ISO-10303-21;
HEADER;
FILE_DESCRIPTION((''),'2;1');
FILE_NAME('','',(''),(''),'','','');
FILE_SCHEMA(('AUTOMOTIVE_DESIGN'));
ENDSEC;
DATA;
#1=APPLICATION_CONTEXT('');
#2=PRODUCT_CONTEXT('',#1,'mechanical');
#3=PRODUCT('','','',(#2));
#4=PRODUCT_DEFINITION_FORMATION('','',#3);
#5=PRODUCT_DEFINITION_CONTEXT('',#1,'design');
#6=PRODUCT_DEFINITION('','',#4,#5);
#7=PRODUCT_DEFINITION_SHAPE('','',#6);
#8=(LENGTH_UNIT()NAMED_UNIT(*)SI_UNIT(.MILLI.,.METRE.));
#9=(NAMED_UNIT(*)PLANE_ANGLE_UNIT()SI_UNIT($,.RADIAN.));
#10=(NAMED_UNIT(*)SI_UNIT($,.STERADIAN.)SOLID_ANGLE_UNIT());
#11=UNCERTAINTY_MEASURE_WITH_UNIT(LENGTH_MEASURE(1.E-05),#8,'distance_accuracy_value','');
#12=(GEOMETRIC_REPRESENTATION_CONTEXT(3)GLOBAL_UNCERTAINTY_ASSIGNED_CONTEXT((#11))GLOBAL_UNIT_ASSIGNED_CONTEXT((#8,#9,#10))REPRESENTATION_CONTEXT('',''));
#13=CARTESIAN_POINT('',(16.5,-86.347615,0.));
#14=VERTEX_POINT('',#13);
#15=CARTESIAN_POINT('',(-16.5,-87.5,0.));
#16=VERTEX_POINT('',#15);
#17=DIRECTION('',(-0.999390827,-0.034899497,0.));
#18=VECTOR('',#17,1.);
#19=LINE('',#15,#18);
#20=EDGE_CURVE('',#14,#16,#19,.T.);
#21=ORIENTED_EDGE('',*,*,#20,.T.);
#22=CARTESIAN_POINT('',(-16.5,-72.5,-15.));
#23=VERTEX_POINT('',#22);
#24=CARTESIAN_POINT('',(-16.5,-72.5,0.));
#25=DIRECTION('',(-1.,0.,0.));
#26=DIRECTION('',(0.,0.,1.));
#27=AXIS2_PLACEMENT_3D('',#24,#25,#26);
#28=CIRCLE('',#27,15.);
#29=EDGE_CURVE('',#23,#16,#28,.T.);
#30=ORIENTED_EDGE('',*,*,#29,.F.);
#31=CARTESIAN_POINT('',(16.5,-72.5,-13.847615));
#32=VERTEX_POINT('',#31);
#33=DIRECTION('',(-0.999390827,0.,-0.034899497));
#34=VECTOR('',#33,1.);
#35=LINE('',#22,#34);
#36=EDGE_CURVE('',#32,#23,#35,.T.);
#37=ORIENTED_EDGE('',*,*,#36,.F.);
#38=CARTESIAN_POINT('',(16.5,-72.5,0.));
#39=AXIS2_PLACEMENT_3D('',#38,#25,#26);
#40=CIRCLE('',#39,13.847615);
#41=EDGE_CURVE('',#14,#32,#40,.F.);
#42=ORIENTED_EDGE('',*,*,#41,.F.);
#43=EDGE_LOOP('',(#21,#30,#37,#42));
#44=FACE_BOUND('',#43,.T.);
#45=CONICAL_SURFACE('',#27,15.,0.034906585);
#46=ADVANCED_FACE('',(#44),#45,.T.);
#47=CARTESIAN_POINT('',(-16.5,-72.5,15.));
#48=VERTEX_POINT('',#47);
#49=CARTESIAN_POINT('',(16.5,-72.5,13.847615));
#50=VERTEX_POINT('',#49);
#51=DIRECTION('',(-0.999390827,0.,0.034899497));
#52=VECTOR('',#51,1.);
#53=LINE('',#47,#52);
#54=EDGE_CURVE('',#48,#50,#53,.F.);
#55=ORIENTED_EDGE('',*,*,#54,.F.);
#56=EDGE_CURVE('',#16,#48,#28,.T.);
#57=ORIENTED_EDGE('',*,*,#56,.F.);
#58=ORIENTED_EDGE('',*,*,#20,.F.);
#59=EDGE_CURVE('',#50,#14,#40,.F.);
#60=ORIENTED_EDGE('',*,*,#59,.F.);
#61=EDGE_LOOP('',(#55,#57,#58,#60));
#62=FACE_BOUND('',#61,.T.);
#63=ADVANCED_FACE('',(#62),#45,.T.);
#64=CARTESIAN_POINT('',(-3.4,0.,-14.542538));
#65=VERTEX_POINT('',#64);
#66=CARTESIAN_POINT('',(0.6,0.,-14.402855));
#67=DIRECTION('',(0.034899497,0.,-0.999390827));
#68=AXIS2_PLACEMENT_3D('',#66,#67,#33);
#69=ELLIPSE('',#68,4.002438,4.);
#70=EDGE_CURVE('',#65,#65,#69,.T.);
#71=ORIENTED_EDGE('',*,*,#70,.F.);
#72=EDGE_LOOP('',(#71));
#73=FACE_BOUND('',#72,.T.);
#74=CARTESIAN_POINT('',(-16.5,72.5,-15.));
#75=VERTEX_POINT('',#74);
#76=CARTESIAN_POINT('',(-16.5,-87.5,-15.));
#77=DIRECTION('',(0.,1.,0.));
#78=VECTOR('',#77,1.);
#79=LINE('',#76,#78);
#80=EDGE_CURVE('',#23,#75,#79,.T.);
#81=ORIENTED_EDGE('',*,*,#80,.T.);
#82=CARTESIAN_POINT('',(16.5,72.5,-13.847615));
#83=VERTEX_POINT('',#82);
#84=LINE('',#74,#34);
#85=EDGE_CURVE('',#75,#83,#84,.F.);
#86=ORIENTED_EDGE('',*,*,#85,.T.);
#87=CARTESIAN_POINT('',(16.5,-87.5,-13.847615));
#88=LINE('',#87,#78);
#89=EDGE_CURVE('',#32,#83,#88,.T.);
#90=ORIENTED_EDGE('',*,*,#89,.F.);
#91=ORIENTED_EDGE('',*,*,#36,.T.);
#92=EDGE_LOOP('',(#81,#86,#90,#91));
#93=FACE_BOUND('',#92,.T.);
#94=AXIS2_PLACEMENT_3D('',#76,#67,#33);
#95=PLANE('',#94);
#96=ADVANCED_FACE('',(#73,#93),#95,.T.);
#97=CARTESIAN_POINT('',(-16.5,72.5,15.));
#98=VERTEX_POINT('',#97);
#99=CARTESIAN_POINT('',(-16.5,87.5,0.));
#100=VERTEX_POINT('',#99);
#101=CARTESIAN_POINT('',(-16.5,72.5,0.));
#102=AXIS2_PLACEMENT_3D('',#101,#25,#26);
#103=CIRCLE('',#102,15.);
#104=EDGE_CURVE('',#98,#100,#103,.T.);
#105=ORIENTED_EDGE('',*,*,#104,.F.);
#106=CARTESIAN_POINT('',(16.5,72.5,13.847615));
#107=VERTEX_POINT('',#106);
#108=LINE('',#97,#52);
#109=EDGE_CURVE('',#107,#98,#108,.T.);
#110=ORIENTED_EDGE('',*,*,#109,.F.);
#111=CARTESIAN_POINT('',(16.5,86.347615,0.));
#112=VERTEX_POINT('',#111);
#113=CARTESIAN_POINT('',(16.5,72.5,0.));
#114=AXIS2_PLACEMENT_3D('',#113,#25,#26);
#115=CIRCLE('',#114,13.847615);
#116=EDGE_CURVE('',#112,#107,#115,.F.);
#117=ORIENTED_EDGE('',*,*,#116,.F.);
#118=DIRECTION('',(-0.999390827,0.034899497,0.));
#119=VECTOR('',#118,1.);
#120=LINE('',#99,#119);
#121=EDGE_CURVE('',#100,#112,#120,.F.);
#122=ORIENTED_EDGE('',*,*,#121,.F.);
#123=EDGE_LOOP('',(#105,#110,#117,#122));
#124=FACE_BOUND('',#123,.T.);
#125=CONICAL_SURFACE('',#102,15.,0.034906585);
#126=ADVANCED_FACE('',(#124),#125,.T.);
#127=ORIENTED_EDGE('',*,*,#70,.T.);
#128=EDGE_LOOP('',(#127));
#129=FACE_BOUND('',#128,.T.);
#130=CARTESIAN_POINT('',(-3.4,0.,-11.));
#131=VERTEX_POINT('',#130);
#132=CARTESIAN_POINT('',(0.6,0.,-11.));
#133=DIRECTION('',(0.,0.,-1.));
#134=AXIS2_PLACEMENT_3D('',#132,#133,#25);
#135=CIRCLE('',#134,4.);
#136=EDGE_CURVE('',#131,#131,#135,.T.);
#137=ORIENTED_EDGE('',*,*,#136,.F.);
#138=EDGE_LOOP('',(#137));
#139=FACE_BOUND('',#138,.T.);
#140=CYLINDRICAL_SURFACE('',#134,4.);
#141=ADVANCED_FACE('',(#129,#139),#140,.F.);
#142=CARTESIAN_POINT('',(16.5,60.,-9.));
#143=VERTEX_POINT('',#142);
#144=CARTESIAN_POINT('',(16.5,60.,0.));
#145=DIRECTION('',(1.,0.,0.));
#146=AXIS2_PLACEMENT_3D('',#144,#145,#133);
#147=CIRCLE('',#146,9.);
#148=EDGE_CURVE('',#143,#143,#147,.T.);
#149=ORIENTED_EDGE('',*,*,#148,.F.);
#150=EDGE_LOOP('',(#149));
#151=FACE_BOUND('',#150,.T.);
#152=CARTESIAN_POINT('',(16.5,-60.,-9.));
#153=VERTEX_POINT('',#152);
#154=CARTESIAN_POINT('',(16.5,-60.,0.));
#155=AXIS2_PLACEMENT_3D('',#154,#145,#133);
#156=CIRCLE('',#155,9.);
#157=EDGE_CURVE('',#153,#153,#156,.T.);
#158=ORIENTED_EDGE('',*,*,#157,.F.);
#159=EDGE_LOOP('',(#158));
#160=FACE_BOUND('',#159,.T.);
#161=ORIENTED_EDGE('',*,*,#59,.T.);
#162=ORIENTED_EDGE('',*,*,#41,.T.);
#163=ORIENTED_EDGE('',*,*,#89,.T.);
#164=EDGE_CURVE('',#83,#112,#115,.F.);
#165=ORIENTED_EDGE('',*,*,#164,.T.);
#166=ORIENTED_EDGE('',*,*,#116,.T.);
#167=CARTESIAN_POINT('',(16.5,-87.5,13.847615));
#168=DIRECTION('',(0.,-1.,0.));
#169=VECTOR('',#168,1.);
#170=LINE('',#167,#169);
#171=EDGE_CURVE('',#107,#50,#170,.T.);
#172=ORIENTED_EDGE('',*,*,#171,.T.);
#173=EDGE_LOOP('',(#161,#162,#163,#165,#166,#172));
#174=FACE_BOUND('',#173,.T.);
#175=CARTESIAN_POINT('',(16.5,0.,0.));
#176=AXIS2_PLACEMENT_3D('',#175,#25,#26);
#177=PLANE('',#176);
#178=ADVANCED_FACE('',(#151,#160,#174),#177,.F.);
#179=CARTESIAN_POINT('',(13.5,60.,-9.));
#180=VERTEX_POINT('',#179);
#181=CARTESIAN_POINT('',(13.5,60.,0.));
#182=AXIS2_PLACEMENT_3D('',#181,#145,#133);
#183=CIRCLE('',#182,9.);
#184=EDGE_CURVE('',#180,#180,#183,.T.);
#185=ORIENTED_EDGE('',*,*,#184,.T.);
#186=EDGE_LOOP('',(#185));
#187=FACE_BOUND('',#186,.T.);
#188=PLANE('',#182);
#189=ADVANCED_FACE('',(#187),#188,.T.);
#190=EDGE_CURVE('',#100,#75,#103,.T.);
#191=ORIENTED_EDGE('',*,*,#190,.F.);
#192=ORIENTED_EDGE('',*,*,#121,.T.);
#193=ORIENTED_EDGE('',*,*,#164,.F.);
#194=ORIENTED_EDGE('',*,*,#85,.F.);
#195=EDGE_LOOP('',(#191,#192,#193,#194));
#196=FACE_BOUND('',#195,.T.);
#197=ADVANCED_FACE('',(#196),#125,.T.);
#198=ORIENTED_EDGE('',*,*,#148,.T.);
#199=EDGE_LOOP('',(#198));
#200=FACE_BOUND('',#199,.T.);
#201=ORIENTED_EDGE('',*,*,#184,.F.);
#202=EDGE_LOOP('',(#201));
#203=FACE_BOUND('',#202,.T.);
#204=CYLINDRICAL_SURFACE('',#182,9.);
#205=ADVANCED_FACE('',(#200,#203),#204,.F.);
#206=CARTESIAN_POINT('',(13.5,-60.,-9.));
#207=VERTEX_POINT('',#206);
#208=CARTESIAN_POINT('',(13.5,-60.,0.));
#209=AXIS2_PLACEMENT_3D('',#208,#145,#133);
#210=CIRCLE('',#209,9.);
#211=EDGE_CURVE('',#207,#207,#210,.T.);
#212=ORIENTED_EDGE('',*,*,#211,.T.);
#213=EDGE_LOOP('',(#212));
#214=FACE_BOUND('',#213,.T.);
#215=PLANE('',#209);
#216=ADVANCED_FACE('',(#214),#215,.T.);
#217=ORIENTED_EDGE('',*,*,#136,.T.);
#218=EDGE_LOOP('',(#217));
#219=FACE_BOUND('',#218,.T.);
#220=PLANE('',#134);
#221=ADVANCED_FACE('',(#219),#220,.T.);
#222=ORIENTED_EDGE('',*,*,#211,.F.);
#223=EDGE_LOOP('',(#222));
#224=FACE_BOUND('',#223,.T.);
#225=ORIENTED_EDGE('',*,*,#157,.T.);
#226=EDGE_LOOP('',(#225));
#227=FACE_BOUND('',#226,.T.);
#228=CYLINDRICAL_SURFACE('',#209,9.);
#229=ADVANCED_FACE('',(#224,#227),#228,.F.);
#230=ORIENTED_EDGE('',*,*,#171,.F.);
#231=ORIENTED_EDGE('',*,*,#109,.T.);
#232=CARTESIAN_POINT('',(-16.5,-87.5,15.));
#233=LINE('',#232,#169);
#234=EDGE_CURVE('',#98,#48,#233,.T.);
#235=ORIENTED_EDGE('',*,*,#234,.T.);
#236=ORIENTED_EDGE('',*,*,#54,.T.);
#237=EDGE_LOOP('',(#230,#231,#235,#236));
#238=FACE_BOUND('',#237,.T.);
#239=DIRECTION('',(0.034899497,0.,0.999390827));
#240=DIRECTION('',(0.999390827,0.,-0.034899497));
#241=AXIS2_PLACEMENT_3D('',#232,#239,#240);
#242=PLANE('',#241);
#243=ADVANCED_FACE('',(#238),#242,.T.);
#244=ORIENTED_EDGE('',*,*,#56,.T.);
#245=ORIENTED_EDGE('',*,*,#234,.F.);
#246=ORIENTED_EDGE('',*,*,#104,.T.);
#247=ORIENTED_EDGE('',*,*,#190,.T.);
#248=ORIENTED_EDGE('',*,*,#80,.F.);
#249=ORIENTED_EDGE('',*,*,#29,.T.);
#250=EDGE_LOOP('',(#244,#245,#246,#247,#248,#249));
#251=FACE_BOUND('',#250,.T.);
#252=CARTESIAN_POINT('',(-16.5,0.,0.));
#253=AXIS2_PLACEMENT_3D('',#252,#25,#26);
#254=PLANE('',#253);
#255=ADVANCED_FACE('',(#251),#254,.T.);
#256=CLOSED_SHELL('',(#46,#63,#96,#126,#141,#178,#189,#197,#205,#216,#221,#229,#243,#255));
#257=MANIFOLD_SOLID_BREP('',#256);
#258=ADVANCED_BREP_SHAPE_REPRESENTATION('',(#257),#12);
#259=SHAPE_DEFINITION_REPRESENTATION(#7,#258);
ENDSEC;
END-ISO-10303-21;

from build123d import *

# Parameters (mm, degrees)
BOSS_EXTRUDE1_DEPTH      = 16.5
BOSS_EXTRUDE1_DEPTH_BACK = 16.5
SKETCH1_W                = 30
SKETCH1_H                = 175
SKETCH2_R                = 9
CUT_EXTRUDE1_DEPTH       = 3
FILLET1_R                = 15
SKETCH3_R                = 4
CUT_EXTRUDE2_DEPTH       = 4
DRAFT1_ANGLE             = -2


with BuildPart() as part:
    # Sketch1 → Boss-Extrude1 (new, two sides: drawn at the far end of the back side and taken through both)
    with BuildSketch(Plane(origin=(0, 0, 0), x_dir=(0, 0, -1), z_dir=(1, 0, 0)).offset(-BOSS_EXTRUDE1_DEPTH_BACK)):
        Rectangle(SKETCH1_W, SKETCH1_H)
    extrude(amount=BOSS_EXTRUDE1_DEPTH + BOSS_EXTRUDE1_DEPTH_BACK)

    # Sketch2 → Cut-Extrude1 (cut)
    with BuildSketch(Plane(origin=(16.5, 0, 0), x_dir=(0, 0, -1), z_dir=(1, 0, 0))):
        with Locations((0, -60)):
            Circle(SKETCH2_R)
        with Locations((0, 60)):
            Circle(SKETCH2_R)
    extrude(amount=-CUT_EXTRUDE1_DEPTH, mode=Mode.SUBTRACT)

    # Fillet1
    fillet1_edges = [part.edges().sort_by_distance(p)[0] for p in [
        (0, 87.5, -15),
        (0, 87.5, 15),
        (0, -87.5, -15),
        (0, -87.5, 15),
    ]]
    fillet(fillet1_edges, radius=FILLET1_R - 0.0001)  # a hair under: the kernel refuses the full size

    # Sketch3 → Cut-Extrude2 (cut)
    with BuildSketch(Plane(origin=(0, 0, -15), x_dir=(-1, 0, 0), z_dir=(0, 0, -1))):
        with Locations((-0.6, 0)):
            Circle(SKETCH3_R)
    extrude(amount=-CUT_EXTRUDE2_DEPTH, mode=Mode.SUBTRACT)

    # Draft1
    draft1_faces = [part.faces().sort_by_distance(p)[0] for p in [
        (0, -83.106631007, -10.606631007),
        (15.012920379, 0, -15),
        (0, 83.106631007, -10.606631007),
        (0, 83.106631007, 10.606631007),
        (0, 0, 15),
        (0, -83.106631007, 10.606631007),
    ]]
    draft(draft1_faces, Plane(origin=(-16.5, 0, 0), x_dir=(0, 0, -1), z_dir=(-1, 0, 0)), DRAFT1_ANGLE)


solid = part.part
